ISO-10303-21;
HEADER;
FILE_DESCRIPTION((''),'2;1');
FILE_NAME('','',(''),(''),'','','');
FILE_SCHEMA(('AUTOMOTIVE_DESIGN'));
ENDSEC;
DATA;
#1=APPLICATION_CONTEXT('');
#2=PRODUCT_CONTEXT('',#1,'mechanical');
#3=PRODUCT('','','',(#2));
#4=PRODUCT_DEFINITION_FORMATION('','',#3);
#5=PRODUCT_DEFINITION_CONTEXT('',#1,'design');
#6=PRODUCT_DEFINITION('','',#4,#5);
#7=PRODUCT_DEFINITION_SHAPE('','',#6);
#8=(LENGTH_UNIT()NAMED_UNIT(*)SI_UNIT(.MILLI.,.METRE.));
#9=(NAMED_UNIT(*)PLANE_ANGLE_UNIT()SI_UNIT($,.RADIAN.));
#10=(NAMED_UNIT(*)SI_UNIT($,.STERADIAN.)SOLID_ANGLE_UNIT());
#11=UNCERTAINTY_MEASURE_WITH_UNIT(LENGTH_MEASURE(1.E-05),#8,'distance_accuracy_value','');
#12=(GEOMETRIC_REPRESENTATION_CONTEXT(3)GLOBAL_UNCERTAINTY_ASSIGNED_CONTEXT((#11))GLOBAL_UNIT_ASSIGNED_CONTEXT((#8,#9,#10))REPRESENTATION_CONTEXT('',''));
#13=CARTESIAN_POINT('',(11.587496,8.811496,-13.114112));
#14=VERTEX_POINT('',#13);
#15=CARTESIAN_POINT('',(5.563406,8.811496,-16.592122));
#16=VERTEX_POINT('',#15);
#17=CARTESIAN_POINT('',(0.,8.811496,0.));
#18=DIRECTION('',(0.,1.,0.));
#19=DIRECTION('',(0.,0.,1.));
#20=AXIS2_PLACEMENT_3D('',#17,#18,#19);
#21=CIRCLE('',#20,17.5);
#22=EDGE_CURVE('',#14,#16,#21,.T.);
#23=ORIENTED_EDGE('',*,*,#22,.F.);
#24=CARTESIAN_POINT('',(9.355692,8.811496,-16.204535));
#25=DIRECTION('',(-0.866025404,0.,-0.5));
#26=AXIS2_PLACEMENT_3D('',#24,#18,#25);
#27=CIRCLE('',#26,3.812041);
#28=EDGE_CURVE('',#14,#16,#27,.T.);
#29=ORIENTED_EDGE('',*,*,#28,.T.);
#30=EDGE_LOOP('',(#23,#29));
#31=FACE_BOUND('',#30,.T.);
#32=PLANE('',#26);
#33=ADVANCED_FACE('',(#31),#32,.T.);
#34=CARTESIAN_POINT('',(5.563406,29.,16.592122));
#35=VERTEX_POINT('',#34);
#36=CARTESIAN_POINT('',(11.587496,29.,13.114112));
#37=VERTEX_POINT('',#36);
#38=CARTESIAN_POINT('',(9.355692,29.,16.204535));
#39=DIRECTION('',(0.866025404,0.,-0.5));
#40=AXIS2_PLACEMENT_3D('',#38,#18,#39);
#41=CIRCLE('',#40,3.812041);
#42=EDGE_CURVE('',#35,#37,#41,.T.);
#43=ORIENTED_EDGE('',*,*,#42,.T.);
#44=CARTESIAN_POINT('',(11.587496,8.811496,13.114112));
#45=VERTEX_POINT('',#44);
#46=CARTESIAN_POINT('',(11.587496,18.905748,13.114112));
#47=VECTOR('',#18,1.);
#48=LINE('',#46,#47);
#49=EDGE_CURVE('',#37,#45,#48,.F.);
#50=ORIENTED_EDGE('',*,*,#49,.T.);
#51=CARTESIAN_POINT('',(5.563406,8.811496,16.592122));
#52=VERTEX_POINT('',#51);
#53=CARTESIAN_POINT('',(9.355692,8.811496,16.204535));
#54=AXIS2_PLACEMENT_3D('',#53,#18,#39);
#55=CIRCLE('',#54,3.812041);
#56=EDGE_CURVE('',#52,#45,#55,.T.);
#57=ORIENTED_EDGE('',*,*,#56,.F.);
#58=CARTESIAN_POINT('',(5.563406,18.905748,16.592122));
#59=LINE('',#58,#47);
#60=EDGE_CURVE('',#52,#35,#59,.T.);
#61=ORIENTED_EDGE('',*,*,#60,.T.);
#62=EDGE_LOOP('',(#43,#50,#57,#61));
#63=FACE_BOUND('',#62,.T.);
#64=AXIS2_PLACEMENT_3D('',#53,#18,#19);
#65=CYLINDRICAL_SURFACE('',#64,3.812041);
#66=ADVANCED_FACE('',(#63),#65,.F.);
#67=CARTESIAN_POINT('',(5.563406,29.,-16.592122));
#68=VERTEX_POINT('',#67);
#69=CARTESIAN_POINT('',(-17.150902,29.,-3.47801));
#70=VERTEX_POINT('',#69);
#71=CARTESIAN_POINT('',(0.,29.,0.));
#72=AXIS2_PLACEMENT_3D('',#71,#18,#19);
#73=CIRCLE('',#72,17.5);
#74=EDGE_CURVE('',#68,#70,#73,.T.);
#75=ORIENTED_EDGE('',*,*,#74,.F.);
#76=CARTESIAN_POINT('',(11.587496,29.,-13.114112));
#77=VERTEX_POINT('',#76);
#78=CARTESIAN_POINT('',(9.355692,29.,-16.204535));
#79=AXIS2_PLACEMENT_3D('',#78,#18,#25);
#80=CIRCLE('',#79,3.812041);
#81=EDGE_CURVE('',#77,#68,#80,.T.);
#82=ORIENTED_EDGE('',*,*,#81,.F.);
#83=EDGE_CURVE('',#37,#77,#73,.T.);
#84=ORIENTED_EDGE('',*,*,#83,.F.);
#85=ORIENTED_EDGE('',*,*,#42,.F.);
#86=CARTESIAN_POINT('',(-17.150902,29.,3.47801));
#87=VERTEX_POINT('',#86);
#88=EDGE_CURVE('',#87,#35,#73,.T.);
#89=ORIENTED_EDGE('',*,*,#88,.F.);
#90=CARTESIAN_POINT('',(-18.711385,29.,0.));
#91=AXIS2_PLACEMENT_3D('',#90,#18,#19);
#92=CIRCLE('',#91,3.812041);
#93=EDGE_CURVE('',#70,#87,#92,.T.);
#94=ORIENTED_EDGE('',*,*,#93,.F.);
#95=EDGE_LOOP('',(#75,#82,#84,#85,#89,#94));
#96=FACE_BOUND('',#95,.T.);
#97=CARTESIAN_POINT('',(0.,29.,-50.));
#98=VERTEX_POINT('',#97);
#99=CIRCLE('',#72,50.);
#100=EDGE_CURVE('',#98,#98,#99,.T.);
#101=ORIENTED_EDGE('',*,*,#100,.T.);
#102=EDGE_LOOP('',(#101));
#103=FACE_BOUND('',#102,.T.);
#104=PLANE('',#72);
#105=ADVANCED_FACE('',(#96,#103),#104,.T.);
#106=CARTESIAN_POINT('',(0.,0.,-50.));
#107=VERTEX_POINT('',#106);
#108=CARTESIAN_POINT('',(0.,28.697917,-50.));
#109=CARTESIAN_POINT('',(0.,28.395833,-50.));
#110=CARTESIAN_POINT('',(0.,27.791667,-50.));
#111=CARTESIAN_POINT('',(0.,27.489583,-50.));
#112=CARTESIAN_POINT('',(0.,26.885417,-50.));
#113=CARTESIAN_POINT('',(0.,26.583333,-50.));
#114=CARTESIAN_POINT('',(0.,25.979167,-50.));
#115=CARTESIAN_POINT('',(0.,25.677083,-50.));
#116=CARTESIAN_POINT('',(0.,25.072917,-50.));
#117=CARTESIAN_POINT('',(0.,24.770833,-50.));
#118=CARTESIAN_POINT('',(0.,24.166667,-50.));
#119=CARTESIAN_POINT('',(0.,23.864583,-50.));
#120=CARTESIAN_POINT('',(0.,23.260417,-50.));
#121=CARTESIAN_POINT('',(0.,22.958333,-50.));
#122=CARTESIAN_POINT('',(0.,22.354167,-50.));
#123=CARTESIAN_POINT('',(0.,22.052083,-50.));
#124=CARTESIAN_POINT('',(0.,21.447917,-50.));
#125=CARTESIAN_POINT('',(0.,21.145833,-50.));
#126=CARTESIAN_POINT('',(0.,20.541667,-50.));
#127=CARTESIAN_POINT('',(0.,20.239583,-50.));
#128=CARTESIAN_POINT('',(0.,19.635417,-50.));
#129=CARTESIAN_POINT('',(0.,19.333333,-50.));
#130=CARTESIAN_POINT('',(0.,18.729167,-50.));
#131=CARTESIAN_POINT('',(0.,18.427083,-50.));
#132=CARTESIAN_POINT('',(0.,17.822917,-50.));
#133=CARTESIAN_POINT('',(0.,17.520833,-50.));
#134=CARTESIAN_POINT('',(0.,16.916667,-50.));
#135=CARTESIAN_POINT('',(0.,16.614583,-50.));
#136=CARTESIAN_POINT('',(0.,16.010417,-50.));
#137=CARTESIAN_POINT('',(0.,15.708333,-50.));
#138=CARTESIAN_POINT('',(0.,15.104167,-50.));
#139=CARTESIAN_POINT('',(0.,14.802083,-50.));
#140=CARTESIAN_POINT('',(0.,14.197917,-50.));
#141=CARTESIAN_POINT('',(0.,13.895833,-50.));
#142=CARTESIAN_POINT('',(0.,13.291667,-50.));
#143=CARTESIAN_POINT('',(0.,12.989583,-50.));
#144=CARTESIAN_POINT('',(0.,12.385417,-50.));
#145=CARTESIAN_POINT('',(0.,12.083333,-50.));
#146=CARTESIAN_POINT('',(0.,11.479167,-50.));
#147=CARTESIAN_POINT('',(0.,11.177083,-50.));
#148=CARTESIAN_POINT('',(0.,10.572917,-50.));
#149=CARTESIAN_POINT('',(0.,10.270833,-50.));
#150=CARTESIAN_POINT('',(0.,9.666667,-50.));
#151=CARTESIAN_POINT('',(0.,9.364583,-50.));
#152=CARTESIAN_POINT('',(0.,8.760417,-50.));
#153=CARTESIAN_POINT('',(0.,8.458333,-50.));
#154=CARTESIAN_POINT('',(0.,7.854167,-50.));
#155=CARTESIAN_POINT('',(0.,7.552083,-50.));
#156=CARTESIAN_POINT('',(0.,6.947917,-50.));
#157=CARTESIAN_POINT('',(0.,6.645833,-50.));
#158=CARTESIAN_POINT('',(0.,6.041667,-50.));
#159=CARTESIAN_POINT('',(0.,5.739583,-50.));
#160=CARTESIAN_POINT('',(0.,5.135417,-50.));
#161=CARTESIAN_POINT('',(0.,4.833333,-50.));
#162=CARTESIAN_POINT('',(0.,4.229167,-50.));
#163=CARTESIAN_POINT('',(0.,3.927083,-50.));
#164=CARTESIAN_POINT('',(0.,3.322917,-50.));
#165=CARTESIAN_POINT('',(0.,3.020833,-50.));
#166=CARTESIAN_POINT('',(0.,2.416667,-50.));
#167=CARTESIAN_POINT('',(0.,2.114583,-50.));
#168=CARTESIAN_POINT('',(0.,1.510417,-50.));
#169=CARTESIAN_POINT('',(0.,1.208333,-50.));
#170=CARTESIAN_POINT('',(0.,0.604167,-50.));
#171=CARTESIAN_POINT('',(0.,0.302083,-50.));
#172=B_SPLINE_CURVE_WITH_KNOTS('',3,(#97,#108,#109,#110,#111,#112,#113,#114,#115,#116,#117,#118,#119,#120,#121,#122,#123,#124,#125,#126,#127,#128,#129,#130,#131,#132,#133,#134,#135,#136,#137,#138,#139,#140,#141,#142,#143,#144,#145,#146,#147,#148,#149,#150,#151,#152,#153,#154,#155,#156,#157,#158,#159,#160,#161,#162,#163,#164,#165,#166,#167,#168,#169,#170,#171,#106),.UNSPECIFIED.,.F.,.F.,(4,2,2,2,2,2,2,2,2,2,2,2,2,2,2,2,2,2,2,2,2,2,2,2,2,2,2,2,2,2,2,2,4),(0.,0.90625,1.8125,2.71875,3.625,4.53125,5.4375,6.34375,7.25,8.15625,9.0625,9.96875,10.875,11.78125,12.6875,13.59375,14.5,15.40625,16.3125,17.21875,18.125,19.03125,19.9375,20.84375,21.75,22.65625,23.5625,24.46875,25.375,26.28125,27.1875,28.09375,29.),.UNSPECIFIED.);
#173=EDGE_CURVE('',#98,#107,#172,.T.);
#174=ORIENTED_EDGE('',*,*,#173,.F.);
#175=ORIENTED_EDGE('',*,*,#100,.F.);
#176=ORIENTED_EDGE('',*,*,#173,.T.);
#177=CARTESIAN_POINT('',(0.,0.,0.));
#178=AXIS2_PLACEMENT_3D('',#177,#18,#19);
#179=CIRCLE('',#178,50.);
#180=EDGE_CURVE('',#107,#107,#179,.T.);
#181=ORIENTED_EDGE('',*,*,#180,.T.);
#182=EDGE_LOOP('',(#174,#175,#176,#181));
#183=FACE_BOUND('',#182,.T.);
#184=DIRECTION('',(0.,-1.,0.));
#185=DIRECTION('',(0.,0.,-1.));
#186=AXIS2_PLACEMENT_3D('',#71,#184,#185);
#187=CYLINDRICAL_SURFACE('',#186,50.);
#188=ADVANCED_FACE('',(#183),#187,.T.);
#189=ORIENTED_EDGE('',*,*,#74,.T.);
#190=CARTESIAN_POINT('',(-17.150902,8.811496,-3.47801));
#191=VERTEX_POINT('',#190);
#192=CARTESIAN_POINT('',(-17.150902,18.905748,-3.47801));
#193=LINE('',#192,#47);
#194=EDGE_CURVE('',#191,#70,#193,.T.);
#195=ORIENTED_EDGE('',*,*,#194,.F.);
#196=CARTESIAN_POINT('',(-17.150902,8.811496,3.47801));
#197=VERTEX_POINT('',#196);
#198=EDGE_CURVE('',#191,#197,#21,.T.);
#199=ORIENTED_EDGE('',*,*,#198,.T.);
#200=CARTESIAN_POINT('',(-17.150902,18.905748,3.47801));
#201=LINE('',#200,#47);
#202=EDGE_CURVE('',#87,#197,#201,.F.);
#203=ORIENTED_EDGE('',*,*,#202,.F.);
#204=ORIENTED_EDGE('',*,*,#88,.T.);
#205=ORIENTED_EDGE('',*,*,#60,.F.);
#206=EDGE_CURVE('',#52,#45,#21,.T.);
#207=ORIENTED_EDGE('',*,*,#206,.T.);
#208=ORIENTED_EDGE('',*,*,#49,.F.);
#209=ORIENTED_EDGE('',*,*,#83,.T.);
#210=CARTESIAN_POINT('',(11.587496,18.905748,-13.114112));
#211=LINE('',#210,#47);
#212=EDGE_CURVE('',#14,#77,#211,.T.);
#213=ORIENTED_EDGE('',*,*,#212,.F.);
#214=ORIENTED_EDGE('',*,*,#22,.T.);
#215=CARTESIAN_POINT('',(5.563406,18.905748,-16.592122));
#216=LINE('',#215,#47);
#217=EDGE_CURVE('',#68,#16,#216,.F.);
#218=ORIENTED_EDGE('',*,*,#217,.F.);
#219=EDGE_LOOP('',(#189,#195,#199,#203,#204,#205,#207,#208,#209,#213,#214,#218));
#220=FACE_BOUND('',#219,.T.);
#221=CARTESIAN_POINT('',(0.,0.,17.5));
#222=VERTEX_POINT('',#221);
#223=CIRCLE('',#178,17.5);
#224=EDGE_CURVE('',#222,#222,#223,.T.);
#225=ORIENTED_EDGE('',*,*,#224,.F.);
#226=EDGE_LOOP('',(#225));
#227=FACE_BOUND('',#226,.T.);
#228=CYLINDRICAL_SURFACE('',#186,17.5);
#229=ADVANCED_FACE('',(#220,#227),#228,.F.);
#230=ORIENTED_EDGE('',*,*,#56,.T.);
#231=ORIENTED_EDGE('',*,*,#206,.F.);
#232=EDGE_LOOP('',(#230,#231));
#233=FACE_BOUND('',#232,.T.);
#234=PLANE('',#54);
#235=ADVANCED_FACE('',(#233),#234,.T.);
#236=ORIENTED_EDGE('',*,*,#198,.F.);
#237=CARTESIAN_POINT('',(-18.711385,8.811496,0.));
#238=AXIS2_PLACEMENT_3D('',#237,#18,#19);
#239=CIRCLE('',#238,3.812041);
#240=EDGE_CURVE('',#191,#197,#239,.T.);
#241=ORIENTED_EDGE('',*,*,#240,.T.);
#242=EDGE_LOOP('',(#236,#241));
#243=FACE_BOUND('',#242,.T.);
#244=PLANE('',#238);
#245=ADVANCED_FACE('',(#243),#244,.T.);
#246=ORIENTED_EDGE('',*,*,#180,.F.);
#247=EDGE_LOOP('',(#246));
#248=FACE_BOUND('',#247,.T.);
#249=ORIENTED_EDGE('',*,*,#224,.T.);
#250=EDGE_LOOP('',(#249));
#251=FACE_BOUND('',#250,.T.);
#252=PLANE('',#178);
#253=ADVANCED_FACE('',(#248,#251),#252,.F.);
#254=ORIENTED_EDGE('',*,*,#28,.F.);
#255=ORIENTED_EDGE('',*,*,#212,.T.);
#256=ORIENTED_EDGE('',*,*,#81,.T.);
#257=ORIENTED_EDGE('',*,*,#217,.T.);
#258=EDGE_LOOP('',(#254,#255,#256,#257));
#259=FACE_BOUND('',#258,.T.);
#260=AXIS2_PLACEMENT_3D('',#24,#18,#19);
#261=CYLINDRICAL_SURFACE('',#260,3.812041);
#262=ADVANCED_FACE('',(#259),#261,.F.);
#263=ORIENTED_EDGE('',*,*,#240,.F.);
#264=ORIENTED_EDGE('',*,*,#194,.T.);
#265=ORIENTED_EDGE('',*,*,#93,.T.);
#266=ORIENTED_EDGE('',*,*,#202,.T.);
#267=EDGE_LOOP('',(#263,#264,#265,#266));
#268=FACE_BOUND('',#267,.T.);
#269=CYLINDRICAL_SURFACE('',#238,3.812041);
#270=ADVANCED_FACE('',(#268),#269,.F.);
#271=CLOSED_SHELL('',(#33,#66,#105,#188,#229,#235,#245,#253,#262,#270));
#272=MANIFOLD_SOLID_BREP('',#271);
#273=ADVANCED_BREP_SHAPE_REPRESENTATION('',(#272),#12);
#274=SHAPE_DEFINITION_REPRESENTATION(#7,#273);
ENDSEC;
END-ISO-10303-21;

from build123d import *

# Parameters (mm, degrees)
SKETCH1_R           = 50
BOSS_EXTRUDE1_DEPTH = 29
SKETCH2_R           = 17.5
CUT_EXTRUDE1_DEPTH  = 77.426435217
SKETCH3_R           = 3.812041362
CUT_EXTRUDE2_DEPTH  = 20.188504131
CIRPATTERN1_COUNT   = 3


with BuildPart() as part:
    # Sketch1 → Boss-Extrude1 (new body)
    with BuildSketch(Plane(origin=(0, 0, 0), x_dir=(1, 0, 0), z_dir=(0, 1, 0))):
        Circle(SKETCH1_R)
    extrude(amount=BOSS_EXTRUDE1_DEPTH)

    # Sketch2 → Cut-Extrude1 (cut, through all)
    with BuildSketch(Plane(origin=(0, 0, 0), x_dir=(1, 0, 0), z_dir=(0, 1, 0))):
        Circle(SKETCH2_R)
    extrude(amount=CUT_EXTRUDE1_DEPTH, mode=Mode.SUBTRACT)

    # Sketch3 → Cut-Extrude2 (cut)
    with BuildSketch(Plane(origin=(0, 29, 0), x_dir=(1, 0, 0), z_dir=(0, 1, 0))):
        with Locations((-18.711384726, 0)):
            Circle(SKETCH3_R)
    cut_extrude2 = extrude(amount=-CUT_EXTRUDE2_DEPTH, mode=Mode.SUBTRACT)

    # CirPattern1: Cut-Extrude2 ×3 about axis
    cirpattern1_axis = Axis((0, 0, 0), (0, 1, 0))
    for i in range(1, CIRPATTERN1_COUNT):
        add(cut_extrude2.rotate(cirpattern1_axis, i * 360 / CIRPATTERN1_COUNT), mode=Mode.SUBTRACT)


solid = part.part
